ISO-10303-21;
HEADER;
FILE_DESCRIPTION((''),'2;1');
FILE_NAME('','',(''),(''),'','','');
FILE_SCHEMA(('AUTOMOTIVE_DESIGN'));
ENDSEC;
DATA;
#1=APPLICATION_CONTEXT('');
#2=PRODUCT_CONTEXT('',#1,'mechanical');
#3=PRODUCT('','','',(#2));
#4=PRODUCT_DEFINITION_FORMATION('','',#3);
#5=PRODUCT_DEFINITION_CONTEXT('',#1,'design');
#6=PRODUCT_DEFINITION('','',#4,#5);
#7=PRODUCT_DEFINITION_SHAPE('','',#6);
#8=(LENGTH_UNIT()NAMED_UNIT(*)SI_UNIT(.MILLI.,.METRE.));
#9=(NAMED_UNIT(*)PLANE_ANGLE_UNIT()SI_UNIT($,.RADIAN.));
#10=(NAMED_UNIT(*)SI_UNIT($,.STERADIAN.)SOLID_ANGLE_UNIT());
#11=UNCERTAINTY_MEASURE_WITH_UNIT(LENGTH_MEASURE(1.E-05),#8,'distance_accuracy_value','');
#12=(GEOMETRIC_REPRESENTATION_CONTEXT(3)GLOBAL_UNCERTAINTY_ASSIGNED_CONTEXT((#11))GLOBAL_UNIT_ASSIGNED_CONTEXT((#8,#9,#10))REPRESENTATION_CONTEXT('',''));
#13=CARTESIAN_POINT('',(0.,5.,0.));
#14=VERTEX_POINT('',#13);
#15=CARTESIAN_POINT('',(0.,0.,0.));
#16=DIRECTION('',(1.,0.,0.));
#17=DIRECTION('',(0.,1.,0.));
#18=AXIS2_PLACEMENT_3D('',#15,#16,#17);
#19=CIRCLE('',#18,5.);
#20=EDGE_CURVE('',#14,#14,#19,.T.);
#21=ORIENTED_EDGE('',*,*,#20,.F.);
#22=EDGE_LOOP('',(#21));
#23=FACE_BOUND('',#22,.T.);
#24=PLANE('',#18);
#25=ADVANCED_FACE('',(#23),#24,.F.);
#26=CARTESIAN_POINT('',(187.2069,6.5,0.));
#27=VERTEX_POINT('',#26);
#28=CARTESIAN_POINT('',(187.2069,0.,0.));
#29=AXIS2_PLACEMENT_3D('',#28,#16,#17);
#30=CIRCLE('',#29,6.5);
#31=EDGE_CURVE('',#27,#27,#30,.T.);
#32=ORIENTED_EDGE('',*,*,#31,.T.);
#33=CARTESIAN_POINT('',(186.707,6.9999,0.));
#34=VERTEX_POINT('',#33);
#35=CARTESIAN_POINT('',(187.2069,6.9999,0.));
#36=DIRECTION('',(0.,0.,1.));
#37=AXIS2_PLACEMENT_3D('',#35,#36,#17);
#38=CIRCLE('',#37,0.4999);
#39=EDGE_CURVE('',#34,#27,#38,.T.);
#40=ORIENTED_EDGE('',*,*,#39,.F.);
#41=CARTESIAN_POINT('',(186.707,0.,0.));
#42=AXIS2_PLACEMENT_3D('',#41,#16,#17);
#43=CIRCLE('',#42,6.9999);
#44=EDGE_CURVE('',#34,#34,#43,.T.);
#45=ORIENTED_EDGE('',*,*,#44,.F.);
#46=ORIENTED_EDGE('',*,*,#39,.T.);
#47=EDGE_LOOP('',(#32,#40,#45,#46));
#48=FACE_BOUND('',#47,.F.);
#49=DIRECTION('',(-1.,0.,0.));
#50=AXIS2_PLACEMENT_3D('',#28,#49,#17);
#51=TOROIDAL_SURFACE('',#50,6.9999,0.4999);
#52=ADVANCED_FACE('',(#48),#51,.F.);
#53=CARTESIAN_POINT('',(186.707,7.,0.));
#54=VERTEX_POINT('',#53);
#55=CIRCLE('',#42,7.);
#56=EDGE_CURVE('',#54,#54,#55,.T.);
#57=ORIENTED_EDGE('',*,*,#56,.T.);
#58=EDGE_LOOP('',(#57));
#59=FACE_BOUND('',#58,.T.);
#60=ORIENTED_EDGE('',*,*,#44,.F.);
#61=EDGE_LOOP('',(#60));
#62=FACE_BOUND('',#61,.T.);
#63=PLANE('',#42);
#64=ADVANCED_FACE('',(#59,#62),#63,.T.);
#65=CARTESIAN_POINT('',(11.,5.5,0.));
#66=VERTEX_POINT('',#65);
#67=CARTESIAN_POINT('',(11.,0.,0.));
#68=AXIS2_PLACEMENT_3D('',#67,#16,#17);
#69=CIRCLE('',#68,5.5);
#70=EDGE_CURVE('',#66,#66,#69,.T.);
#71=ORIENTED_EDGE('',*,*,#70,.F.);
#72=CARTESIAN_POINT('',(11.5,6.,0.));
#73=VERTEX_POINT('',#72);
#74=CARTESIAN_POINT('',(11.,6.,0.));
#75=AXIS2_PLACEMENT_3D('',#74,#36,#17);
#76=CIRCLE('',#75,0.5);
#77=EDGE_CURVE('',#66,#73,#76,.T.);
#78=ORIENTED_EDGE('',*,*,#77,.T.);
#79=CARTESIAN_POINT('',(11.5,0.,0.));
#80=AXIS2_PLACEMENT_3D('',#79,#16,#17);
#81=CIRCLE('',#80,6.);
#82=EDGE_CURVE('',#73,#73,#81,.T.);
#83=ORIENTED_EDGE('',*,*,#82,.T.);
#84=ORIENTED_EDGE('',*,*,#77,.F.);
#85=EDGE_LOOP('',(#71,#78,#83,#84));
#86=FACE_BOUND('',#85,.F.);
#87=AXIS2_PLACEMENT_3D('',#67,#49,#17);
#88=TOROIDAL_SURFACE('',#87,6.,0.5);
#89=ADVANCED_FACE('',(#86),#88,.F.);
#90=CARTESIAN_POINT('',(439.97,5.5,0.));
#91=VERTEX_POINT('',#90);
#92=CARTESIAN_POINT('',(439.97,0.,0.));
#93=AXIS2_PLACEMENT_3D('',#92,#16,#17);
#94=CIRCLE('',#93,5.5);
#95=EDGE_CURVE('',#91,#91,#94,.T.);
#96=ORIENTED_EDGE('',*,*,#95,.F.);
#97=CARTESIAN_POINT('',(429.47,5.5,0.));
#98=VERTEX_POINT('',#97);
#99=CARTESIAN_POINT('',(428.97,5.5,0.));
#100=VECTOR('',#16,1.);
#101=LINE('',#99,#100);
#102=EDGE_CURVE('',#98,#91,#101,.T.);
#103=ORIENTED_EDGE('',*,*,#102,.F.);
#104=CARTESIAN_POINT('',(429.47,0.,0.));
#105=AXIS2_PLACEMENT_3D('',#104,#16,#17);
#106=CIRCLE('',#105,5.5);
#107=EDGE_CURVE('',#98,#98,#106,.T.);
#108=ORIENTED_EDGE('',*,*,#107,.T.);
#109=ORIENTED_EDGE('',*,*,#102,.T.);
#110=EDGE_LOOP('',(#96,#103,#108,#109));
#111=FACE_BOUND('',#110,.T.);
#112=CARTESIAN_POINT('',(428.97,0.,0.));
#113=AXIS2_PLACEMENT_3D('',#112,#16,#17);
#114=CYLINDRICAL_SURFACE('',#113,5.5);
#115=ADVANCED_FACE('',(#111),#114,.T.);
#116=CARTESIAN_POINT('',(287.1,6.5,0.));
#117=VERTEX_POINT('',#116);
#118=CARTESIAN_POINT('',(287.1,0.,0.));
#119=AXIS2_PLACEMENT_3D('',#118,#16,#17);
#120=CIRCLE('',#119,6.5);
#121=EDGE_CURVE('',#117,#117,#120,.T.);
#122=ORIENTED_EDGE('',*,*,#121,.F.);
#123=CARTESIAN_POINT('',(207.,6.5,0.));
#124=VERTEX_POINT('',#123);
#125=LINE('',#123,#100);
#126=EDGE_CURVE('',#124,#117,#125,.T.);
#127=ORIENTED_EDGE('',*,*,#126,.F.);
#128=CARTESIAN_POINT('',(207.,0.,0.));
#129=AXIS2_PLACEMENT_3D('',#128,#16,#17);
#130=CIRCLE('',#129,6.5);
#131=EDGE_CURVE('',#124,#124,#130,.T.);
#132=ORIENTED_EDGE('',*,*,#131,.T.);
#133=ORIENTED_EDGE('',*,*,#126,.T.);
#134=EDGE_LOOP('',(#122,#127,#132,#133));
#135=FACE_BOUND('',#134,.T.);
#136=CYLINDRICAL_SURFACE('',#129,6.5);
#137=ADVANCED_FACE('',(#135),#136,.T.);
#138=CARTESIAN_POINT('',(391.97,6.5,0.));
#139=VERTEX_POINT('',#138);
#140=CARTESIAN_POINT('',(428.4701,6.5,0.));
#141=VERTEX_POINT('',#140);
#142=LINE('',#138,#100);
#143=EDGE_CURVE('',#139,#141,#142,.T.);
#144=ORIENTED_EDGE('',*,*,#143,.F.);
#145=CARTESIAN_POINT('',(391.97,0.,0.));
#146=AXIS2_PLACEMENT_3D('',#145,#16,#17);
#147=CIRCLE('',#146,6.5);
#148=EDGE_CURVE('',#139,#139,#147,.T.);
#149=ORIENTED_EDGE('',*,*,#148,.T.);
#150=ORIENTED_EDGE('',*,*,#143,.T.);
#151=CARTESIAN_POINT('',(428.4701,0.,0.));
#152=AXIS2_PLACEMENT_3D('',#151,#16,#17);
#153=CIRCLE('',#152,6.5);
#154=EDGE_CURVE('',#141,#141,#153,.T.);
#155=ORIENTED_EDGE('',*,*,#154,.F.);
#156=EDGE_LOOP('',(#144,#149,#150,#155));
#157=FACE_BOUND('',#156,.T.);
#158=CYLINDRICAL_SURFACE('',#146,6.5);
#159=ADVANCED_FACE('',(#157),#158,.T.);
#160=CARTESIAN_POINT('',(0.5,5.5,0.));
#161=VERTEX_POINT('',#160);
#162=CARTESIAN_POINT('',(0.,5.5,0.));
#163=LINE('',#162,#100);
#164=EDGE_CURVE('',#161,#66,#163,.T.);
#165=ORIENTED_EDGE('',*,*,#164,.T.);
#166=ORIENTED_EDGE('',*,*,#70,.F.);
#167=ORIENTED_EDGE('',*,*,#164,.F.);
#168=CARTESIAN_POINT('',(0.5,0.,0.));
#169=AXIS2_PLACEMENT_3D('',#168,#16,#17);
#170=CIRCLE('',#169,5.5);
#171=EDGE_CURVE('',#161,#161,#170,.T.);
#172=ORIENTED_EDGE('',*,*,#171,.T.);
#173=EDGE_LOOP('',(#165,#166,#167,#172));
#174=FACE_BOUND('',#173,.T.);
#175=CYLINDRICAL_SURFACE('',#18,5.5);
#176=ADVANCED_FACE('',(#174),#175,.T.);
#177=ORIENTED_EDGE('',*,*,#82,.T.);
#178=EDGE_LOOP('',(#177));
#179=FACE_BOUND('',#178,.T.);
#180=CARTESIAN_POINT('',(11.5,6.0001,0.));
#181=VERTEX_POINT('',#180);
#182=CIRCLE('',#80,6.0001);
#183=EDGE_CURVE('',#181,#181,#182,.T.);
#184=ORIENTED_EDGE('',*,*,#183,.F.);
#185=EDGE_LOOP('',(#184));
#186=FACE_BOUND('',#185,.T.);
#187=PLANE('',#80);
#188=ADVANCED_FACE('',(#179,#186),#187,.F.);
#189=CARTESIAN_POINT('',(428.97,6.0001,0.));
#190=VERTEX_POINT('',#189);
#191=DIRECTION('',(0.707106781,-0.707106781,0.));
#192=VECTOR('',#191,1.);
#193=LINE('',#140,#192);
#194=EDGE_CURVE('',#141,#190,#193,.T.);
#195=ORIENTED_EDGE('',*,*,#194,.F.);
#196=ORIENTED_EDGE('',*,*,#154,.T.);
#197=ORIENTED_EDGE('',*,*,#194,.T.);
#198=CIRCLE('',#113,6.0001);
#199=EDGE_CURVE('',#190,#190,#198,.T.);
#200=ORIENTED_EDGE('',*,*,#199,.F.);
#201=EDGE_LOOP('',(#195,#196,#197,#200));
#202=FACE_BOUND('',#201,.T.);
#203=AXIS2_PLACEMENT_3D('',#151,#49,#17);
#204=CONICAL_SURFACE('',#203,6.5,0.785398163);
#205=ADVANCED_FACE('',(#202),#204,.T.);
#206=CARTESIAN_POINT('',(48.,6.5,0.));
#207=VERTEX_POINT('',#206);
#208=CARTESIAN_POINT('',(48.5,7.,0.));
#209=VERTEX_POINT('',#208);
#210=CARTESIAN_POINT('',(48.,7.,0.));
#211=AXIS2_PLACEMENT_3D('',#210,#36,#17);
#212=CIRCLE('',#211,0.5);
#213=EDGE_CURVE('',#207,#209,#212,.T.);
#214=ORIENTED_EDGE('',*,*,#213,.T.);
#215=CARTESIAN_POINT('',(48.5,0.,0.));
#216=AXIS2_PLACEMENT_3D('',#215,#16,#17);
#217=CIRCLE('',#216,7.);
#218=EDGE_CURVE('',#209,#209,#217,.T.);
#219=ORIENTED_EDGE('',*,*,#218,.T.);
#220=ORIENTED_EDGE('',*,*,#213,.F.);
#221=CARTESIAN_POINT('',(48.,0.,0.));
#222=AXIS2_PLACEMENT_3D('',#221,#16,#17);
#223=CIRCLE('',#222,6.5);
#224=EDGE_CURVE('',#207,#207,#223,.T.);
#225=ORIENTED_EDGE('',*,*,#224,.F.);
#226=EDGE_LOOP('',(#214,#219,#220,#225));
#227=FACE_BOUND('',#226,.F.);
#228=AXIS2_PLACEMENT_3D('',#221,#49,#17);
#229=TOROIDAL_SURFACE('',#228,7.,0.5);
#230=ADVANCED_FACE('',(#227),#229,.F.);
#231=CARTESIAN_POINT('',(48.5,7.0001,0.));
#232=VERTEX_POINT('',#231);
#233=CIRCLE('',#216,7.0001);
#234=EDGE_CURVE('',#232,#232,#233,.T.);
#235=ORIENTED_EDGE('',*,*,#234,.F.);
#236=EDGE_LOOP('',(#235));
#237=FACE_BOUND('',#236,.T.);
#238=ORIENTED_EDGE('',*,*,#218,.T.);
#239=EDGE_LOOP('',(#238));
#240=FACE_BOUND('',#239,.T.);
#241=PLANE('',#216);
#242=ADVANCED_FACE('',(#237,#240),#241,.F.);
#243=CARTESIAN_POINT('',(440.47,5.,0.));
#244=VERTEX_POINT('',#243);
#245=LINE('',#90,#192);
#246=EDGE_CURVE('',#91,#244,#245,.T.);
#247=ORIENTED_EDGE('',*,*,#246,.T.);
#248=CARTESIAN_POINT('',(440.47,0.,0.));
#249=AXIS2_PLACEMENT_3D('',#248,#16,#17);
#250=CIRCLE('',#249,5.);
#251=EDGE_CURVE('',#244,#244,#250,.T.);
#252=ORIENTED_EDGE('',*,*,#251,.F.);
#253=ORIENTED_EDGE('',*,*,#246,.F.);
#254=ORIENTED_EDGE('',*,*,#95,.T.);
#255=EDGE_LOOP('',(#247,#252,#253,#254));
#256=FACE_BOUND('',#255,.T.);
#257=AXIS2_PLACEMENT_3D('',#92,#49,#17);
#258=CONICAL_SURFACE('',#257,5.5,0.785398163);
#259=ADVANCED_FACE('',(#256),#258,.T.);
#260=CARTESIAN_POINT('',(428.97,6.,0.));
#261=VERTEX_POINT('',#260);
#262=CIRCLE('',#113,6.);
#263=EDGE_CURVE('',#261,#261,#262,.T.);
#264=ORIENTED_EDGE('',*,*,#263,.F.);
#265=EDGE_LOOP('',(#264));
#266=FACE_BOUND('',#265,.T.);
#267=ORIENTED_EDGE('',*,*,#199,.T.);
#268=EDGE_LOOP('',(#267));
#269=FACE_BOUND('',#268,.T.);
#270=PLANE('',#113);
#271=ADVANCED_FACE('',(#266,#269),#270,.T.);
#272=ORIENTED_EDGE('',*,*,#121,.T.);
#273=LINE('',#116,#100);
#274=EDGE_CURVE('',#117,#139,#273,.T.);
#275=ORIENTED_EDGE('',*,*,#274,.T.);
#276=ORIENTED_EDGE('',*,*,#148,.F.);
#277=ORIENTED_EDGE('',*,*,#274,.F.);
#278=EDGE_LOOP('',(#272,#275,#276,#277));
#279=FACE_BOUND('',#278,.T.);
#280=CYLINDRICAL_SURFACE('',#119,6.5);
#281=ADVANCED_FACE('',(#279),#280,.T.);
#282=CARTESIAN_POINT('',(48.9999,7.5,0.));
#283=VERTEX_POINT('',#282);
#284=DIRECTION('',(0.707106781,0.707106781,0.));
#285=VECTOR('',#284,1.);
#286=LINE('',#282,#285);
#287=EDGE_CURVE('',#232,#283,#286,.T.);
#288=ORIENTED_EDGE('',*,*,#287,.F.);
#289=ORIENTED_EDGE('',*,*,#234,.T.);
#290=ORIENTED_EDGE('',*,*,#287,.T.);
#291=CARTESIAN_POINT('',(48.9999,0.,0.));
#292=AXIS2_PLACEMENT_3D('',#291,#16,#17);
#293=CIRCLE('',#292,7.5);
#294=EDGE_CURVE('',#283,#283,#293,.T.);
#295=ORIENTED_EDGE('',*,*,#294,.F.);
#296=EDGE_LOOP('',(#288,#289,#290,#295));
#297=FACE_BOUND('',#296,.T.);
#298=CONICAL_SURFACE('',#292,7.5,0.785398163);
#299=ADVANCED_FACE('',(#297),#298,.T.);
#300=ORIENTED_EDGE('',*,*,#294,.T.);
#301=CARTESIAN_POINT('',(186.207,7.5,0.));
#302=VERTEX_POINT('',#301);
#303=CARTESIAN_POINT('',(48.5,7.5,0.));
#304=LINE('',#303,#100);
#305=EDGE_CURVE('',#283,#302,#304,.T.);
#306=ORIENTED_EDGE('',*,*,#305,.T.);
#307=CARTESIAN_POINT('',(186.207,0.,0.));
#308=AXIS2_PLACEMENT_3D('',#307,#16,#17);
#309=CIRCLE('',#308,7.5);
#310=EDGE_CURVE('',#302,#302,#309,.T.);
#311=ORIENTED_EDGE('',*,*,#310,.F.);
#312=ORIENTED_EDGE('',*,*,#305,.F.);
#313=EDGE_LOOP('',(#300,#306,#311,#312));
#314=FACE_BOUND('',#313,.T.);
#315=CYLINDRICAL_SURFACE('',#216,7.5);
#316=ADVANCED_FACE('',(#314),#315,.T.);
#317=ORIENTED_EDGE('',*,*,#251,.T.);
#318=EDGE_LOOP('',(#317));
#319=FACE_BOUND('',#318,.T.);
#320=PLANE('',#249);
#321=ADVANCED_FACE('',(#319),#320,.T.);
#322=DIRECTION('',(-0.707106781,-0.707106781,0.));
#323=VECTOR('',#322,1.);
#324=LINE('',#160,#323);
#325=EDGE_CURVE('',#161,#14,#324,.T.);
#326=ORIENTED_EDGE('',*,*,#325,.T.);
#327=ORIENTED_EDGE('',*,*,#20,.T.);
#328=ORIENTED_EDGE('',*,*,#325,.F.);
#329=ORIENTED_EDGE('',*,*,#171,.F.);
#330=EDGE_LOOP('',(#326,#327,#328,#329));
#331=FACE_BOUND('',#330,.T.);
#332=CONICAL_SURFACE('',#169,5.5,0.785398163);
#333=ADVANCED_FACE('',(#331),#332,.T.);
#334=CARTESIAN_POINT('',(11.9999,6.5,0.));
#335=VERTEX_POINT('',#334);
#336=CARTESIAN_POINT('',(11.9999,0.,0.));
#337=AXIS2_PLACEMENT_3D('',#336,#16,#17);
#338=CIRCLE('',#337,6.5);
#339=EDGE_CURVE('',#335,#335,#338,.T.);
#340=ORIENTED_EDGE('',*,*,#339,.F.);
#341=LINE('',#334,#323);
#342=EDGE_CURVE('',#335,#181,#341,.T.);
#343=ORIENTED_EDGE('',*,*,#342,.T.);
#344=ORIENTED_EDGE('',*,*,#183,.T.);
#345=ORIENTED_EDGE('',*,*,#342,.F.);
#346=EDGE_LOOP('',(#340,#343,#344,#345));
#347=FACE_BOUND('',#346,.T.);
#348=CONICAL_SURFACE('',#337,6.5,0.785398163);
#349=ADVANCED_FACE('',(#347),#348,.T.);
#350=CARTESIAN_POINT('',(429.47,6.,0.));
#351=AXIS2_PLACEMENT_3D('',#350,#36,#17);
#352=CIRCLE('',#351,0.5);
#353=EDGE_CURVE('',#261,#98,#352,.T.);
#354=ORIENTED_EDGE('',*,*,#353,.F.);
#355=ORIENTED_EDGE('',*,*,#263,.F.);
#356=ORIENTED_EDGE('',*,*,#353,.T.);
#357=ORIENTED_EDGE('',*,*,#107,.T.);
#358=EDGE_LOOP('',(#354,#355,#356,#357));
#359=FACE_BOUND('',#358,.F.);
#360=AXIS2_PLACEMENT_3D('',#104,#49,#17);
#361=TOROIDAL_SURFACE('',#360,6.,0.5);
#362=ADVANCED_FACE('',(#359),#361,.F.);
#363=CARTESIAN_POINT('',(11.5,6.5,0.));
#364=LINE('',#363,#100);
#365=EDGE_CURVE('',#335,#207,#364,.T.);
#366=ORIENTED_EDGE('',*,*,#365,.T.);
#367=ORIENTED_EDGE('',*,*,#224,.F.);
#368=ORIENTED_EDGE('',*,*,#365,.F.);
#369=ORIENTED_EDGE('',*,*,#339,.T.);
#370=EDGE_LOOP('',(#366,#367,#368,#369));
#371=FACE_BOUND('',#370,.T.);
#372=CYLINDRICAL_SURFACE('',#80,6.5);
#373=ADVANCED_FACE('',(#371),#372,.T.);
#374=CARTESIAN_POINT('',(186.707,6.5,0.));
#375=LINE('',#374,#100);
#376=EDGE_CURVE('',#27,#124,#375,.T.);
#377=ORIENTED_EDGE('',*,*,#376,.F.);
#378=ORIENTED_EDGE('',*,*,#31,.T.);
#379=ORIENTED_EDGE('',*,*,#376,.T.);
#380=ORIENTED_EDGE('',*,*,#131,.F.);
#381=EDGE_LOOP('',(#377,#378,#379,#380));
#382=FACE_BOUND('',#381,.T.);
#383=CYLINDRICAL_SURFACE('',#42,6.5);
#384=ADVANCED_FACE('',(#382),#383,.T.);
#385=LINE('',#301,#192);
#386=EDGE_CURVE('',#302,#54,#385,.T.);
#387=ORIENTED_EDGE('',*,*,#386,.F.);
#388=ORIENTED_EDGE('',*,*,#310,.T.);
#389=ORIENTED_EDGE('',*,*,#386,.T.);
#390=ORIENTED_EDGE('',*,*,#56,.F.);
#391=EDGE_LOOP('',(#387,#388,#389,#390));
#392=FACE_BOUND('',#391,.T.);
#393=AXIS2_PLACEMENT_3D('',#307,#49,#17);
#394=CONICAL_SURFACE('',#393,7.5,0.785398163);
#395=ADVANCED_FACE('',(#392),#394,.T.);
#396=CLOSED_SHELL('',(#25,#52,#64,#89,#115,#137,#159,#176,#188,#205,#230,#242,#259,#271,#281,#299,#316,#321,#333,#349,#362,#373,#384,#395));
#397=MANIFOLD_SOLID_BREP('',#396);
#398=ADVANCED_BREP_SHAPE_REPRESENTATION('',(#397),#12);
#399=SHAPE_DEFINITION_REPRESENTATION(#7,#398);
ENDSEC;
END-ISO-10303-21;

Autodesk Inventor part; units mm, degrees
ref_plane "Plano inicial" through (0, 0, 0) normal (1, 0, 0) x (0, 1, 0)
ref_plane "XZ Plane" through (0, 0, 0) normal (0, 1, 0) x (-1, 0, 0)
ref_plane "XY Plane" through (0, 0, 0) normal (0, 0, 1) x (1, 0, 0)
sketch "Boceto principal" plane through (0, 0, 0) normal (0, 0, 1) x (1, 0, 0)
  line L0 (0, 0) -> (440.47, 0)
  line L1 (11.5, 5.5) -> (11.5, 6.5)
  line L2 (11.5, 6.5) -> (48.5, 6.5)
  line L3 (0, 5.5) -> (11.5, 5.5)
  line L4 (186.707, 7.5) -> (186.707, 6.5)
  line L5 (48.5, 7.5) -> (186.707, 7.5)
  line L6 (0, 0) -> (0, 5.5)
  line L7 (48.5, 6.5) -> (48.5, 7.5)
  line L8 (186.707, 6.5) -> (207, 6.5)
  line L9 (207, 6.5) -> (287.1, 6.5)
  line L10 (287.1, 6.5) -> (391.97, 6.5)
  line L11 (428.97, 6.5) -> (428.97, 5.5)
  line L12 (391.97, 6.5) -> (428.97, 6.5)
  line L13 (440.47, 5.5) -> (440.47, 0)
  line L14 (428.97, 5.5) -> (440.47, 5.5)
  dimension "d3" = 13
  dimension "d4" = 11
  dimension "d5" = 15
  dimension "d10" = 13
  dimension "d11" = 13
  dimension "d12" = 13
  dimension "d13" = 13
  dimension "d41" = 11
revolve "Revolución1" add sketch "Boceto principal" angle 360 about axis through (0, 0, 0) along (1, 0, 0)
fillet "Fillet7" radius 0.5 1 edges at (428.97, -5.5, 0)
chamfer "Chamfer9" distance 0.5 angle 45 1 edges at (440.47, -5.5, 0) measured on face at (433.1367, 5.4288, -0.8823)
chamfer "Chamfer2" distance 0.5 angle 45 1 edges at (0, -5.5, 0) measured on face at (3.8333, 5.4288, -0.8823)
fillet "Fillet1" radius 0.5 1 edges at (11.5, -5.5, 0)
fillet "Fillet2" radius 0.5 1 edges at (48.5, -6.5, 0)
chamfer "Chamfer3" distance 0.5 angle 45 1 edges at (48.5, -7.5, 0) measured on face at (94.569, 7.4029, -1.2031)
chamfer "Chamfer4" distance 0.5 angle 45 1 edges at (186.707, -7.5, 0) measured on face at (94.9023, 7.4757, -0.6035)
fillet "Fillet3" radius 0.5 1 edges at (186.707, -6.5, 0)
chamfer "Chamfer8" distance 0.5 angle 45 1 edges at (428.97, -6.5, 0) measured on face at (404.3033, 6.4158, -1.0427)
chamfer "Chaflán1" distance 0.5 angle 45 1 edges at (11.5, -6.5, 0) measured on face at (23.6667, 6.4789, -0.523)
properties part number "Eje" material "Steel"
